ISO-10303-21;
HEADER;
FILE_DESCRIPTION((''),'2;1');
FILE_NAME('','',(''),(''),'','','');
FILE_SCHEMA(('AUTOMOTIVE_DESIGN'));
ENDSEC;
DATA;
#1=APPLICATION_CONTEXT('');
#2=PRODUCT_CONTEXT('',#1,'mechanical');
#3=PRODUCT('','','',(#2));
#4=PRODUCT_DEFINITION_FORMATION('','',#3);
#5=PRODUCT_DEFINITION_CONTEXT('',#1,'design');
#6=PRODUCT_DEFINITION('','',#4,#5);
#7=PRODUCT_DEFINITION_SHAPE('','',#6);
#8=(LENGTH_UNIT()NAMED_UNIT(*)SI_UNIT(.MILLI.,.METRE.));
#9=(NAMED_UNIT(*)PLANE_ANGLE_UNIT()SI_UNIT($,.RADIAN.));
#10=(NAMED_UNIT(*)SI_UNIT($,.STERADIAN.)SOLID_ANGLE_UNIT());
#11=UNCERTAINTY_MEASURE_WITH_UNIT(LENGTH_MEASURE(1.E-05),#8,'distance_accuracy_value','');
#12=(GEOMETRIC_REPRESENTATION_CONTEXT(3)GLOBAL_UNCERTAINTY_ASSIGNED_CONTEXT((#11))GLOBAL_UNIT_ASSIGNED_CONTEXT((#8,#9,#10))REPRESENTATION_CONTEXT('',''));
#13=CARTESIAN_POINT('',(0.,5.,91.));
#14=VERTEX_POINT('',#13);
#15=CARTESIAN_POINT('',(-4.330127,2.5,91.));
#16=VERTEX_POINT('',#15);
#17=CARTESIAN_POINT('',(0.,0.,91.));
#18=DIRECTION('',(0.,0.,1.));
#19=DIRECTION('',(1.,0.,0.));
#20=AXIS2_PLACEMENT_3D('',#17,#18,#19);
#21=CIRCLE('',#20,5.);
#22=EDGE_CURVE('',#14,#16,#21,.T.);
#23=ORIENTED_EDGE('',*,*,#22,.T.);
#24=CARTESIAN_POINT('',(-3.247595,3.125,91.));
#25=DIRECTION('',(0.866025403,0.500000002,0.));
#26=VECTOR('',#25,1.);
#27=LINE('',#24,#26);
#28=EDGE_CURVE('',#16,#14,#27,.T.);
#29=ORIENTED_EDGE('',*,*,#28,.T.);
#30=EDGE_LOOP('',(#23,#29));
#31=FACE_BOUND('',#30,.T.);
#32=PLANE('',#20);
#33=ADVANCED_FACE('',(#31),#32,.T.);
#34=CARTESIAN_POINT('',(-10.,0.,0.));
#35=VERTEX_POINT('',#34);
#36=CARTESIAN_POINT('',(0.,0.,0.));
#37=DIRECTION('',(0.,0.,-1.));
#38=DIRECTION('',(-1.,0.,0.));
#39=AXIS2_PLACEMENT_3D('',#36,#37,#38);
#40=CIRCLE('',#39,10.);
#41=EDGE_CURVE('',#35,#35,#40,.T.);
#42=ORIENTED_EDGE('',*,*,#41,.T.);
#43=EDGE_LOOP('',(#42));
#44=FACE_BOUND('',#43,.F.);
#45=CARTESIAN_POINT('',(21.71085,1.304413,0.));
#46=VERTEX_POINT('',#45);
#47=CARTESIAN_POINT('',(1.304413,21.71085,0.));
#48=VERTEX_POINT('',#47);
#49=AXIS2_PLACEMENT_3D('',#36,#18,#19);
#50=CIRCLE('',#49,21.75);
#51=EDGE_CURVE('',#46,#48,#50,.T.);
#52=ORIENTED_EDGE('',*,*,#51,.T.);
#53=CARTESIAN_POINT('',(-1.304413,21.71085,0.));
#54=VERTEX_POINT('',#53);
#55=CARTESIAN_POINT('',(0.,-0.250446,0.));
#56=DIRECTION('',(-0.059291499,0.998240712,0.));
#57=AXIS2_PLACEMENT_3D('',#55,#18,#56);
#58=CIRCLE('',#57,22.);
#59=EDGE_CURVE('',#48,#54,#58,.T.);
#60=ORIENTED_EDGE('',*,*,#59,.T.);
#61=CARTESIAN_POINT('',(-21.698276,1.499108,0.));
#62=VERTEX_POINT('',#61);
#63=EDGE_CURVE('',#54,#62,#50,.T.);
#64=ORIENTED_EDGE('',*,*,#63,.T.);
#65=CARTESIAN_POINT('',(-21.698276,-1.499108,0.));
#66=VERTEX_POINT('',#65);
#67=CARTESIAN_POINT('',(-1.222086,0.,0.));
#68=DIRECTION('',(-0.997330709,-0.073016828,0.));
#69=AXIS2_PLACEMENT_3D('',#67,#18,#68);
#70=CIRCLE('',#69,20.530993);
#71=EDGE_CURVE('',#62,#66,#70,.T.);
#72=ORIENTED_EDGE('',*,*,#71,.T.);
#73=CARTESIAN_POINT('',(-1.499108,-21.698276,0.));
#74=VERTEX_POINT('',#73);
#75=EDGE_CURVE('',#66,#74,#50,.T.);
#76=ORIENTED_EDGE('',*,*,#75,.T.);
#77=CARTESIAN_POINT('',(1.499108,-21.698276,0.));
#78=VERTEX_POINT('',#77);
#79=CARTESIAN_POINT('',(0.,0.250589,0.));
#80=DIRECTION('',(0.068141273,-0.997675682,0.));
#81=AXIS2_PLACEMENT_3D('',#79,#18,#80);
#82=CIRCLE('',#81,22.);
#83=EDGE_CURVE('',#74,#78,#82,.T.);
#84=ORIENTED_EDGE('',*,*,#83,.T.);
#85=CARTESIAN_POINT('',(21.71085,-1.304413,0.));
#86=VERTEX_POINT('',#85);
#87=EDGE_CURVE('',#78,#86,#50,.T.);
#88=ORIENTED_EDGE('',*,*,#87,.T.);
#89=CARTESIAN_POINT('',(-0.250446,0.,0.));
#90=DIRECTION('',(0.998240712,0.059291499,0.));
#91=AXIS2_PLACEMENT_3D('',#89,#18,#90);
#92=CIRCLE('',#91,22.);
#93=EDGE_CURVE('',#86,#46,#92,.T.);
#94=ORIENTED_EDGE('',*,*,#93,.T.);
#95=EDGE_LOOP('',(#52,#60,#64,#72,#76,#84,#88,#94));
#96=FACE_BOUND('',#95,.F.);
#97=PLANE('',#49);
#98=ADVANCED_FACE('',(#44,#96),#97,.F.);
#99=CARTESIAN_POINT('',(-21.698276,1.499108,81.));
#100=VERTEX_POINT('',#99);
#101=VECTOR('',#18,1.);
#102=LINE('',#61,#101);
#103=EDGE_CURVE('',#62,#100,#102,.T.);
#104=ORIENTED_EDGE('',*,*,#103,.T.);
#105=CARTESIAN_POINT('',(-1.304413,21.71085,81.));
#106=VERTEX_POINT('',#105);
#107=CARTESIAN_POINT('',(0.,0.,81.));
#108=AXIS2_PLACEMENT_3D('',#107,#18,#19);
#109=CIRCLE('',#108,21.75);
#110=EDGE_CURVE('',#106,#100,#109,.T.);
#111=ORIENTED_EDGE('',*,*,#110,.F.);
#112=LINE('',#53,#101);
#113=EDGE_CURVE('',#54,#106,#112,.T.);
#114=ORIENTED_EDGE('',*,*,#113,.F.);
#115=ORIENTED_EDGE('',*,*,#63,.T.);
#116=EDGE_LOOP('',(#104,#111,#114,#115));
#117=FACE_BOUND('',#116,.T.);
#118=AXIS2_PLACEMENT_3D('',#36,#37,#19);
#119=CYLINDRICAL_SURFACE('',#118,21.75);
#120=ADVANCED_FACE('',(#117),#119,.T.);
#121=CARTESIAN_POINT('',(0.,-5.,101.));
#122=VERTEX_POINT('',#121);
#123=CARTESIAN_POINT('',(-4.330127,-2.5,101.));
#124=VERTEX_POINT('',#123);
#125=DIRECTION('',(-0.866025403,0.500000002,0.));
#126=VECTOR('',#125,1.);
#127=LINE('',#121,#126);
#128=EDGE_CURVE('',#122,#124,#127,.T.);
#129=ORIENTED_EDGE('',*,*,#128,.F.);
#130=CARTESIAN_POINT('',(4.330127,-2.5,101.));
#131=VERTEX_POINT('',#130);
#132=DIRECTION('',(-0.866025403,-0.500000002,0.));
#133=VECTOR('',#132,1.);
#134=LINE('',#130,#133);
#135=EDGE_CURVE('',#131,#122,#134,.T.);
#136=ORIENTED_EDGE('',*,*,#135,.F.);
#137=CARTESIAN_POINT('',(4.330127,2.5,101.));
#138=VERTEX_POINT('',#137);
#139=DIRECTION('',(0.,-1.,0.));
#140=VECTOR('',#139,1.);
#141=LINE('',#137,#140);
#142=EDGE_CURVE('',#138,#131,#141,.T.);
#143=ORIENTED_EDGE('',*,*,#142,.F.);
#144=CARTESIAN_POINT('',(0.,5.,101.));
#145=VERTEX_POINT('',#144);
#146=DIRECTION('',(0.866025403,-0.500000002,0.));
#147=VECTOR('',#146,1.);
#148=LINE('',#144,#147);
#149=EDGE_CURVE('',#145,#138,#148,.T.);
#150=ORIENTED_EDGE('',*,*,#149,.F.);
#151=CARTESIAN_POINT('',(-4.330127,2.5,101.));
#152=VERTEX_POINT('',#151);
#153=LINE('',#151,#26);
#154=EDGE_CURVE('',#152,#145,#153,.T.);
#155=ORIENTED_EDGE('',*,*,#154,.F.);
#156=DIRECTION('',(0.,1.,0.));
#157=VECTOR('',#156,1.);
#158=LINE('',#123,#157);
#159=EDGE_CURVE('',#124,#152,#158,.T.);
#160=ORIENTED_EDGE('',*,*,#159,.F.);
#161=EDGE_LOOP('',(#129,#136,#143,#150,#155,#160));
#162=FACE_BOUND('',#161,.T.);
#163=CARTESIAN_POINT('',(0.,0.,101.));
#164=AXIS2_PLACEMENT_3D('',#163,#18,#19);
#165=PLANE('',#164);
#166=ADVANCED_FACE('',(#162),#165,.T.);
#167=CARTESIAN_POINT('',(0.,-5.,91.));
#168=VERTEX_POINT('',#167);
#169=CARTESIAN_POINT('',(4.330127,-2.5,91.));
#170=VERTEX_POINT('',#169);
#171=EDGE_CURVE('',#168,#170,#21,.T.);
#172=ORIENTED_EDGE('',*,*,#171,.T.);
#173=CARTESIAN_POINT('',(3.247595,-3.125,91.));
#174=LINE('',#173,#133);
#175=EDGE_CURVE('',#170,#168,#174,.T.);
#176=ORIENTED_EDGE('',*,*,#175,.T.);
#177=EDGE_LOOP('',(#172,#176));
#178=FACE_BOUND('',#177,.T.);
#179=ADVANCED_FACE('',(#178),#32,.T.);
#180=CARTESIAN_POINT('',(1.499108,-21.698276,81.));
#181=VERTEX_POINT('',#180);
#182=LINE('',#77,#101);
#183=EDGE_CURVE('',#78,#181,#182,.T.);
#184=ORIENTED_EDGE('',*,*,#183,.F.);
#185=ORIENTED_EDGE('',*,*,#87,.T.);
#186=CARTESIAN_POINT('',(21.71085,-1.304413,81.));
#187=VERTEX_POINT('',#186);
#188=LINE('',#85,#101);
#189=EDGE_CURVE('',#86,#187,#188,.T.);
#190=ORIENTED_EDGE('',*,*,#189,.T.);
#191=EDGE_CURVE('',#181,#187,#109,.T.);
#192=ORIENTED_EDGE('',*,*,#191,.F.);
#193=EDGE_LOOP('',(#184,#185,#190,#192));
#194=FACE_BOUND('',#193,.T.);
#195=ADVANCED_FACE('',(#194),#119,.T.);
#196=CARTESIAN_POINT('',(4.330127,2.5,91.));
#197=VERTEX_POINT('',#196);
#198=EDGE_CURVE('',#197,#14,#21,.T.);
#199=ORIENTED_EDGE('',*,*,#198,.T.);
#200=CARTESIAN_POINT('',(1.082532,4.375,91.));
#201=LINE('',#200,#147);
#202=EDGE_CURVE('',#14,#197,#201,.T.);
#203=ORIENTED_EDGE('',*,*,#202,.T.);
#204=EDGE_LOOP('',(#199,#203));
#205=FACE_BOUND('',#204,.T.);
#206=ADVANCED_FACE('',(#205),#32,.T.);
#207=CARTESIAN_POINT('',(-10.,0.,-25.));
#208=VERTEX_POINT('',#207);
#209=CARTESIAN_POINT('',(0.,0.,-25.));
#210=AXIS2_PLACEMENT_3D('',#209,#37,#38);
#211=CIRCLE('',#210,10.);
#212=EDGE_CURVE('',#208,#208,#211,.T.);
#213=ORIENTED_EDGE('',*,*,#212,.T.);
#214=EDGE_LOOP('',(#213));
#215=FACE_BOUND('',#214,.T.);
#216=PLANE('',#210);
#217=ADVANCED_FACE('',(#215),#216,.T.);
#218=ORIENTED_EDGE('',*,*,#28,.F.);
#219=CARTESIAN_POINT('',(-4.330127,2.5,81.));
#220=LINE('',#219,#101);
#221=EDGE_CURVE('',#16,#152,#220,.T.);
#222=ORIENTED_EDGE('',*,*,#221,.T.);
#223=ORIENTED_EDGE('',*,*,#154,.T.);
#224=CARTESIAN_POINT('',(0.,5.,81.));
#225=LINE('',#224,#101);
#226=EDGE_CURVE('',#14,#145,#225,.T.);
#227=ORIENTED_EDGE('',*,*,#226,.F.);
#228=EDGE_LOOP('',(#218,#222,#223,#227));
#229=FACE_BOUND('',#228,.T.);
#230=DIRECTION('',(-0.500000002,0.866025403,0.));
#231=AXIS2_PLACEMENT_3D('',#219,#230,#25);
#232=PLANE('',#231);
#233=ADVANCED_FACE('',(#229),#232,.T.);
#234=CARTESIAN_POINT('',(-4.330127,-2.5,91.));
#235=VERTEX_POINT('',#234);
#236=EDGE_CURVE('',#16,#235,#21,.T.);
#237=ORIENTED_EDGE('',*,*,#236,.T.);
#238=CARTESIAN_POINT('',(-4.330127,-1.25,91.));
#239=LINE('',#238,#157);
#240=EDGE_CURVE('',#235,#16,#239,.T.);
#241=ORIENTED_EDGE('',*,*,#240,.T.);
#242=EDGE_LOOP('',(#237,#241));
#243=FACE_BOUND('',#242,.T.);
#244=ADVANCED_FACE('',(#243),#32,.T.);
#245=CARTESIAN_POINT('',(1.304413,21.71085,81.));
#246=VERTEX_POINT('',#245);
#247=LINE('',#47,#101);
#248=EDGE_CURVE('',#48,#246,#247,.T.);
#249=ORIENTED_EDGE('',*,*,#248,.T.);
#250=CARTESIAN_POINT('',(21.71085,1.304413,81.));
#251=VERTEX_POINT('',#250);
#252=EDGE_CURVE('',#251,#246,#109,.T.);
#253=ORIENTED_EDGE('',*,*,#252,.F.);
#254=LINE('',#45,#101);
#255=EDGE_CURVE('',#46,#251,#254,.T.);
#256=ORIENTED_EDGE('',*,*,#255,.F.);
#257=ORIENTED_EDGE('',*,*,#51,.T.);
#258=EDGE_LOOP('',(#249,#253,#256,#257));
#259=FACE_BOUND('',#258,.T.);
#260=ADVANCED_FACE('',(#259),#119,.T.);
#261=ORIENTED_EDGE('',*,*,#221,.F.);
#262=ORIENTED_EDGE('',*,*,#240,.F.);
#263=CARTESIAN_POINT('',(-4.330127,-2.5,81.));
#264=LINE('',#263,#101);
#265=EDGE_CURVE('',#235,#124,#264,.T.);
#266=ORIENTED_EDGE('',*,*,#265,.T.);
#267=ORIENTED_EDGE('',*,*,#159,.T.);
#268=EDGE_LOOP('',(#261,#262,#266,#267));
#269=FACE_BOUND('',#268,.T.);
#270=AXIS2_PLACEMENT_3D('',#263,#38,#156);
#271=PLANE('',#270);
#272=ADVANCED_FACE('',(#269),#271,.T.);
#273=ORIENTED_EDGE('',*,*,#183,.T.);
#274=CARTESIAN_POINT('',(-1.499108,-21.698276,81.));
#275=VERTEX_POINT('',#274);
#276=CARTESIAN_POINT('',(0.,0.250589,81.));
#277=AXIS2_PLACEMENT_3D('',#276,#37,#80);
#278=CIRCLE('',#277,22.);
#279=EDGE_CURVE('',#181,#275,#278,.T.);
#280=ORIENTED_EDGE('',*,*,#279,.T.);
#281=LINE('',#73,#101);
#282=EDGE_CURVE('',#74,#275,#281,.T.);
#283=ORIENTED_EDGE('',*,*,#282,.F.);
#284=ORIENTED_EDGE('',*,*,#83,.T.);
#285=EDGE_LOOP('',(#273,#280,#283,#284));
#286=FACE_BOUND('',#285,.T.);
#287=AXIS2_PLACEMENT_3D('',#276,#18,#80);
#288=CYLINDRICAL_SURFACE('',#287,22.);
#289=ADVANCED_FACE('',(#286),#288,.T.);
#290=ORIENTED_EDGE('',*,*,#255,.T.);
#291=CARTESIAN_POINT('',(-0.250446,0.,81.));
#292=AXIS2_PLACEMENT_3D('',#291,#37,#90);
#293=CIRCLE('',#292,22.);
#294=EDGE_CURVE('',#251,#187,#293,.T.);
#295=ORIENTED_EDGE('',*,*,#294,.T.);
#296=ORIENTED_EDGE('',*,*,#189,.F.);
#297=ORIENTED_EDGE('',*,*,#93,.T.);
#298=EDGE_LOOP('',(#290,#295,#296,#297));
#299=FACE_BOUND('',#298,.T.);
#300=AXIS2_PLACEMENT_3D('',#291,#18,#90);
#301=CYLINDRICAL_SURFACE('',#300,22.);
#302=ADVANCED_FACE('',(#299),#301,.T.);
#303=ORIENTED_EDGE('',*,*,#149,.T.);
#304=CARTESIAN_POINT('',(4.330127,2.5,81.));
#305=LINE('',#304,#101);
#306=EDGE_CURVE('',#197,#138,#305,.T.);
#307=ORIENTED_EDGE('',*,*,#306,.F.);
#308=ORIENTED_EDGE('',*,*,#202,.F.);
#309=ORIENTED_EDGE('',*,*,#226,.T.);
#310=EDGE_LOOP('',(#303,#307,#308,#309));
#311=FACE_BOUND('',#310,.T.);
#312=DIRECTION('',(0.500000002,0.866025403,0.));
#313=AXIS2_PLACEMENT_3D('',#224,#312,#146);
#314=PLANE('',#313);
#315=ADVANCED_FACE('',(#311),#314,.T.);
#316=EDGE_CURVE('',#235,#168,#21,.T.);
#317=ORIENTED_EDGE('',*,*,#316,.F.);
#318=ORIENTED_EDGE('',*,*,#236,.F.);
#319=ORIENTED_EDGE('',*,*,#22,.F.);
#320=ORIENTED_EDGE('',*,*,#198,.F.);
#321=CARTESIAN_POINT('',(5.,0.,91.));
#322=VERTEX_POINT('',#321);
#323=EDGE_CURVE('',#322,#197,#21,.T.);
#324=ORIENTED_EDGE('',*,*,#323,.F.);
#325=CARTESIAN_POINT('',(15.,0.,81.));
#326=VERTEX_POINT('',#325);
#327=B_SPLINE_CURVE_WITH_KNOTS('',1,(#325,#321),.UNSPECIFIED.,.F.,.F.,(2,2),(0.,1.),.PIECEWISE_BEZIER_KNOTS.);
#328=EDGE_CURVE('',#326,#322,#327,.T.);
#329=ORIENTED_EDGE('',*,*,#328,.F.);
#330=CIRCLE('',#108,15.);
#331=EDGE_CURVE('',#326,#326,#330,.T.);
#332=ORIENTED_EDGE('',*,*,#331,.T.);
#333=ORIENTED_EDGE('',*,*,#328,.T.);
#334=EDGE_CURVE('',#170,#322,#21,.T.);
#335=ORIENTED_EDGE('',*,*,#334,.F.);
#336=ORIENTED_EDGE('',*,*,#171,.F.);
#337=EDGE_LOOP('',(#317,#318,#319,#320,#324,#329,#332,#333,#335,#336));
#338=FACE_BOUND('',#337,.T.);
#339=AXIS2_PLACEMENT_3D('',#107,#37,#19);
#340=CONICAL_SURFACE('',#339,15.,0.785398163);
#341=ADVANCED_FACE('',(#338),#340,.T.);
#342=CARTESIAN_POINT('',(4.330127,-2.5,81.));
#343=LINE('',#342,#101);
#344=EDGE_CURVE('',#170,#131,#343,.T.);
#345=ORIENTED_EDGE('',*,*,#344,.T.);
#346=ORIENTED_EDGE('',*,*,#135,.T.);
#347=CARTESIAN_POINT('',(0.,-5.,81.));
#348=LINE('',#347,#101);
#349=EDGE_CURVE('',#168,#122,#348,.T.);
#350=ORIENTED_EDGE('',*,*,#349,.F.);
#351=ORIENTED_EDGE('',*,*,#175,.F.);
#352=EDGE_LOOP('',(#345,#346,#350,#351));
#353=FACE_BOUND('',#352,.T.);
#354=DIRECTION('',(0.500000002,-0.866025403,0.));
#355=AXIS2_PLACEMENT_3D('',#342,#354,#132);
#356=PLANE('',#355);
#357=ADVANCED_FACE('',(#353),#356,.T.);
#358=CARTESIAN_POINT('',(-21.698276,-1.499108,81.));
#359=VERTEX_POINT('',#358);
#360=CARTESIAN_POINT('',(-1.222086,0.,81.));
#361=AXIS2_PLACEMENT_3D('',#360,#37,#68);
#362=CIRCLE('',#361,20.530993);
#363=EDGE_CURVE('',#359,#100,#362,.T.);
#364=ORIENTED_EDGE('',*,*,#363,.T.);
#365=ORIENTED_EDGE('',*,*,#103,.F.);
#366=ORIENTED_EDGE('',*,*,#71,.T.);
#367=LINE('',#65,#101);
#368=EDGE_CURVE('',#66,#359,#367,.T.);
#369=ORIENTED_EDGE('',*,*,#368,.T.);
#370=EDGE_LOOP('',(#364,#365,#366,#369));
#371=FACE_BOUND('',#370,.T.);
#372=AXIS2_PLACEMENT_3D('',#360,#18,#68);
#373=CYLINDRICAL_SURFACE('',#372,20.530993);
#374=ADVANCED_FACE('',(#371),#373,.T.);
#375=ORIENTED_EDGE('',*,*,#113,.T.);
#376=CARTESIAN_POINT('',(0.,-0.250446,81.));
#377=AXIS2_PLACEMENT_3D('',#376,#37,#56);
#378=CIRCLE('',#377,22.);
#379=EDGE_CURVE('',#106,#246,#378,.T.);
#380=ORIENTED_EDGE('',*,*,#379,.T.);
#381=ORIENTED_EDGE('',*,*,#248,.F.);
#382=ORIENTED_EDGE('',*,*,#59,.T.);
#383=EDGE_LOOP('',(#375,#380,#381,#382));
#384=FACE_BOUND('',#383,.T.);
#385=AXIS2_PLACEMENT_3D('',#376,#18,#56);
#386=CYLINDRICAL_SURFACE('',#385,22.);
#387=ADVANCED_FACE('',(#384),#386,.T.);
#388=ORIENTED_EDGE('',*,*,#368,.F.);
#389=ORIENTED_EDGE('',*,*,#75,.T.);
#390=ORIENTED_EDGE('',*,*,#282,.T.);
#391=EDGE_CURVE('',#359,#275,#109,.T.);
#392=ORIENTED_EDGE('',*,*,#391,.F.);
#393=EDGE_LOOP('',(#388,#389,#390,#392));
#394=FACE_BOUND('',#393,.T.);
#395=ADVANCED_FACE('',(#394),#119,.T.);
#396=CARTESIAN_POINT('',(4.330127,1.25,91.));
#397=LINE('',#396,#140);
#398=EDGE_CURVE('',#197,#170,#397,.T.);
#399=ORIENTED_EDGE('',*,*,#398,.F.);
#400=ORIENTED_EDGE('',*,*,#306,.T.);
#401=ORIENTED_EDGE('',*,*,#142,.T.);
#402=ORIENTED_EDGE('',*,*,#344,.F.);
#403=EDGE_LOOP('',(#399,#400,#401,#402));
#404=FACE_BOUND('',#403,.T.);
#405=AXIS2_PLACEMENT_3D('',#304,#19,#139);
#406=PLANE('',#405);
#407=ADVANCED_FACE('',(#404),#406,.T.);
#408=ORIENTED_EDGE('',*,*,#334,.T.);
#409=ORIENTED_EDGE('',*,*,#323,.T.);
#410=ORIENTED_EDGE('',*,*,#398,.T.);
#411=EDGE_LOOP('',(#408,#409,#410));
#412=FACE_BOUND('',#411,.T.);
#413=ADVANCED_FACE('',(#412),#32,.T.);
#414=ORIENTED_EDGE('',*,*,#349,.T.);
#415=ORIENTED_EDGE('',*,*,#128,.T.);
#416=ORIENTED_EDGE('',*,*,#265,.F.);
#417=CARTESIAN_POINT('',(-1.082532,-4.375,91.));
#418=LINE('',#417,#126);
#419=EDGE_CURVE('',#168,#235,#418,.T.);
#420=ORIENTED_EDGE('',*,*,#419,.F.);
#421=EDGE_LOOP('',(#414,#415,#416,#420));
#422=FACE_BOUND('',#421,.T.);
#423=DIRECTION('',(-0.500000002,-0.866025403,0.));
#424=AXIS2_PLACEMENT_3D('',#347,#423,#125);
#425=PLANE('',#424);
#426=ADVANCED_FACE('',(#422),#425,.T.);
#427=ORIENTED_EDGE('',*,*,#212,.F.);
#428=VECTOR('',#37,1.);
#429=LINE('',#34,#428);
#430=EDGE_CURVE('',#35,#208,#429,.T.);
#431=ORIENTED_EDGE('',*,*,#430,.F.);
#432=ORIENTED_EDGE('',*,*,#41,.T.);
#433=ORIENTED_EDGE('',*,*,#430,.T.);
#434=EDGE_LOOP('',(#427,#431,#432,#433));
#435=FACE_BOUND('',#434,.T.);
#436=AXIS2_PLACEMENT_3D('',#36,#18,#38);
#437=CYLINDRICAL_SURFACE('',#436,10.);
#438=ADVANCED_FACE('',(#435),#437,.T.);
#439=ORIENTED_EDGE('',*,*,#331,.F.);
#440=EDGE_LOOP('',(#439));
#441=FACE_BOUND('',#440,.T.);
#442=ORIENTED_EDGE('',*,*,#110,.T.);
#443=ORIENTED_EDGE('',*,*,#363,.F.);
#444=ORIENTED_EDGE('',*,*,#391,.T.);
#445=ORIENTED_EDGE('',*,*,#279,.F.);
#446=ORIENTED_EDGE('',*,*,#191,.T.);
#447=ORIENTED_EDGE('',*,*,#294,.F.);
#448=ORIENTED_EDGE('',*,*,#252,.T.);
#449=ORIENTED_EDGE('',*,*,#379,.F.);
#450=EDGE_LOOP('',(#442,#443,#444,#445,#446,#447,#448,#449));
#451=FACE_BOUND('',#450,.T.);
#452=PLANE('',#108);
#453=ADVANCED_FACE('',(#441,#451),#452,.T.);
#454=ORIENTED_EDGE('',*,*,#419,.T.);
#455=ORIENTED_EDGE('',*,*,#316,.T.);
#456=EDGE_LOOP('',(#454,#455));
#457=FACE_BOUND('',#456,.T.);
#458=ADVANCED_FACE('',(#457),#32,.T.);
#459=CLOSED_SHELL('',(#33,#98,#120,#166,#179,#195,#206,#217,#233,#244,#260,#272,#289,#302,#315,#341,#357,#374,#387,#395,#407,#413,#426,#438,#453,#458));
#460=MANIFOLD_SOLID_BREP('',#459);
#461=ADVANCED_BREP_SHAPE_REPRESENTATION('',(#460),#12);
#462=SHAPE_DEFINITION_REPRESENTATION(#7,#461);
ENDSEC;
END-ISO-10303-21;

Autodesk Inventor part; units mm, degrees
ref_plane "YZ Plane" through (0, 0, 0) normal (1, 0, 0) x (0, 1, 0)
ref_plane "XZ Plane" through (0, 0, 0) normal (0, 1, 0) x (-1, 0, 0)
ref_plane "XY Plane" through (0, 0, 0) normal (0, 0, 1) x (1, 0, 0)
sketch "Boceto1" plane through (0, 0, 0) normal (0, 0, 1) x (1, 0, 0)
  circle A0 centre (0, 0) radius 21.75
  arc A1 (1.304413, 21.71085) -> (0, 23.055) centre (0, 21.75) ccw
  arc A2 (0, 23.055) -> (-1.304413, 21.71085) centre (0, 21.75) ccw
  line L0 (0, -21.75) -> (0, -23.25)
  arc A3 (0, -23.25) -> (1.499108, -21.698276) centre (0, -21.75) ccw
  arc A4 (-1.499108, -21.698276) -> (0, -23.25) centre (0, -21.75) ccw
  line L1 (21.75, 0) -> (23.055, 0)
  line L2 (-21.75, 0) -> (-23.25, 0)
  arc A5 (-21.698276, 1.499108) -> (-21.698276, -1.499108) centre (-21.75, 0) ccw
  arc A6 (21.71085, -1.304413) -> (21.71085, 1.304413) centre (21.75, 0) ccw
  dimension "d0" = 43.5
  dimension "d2" = 1.5
  dimension "d4" = 1.5
extrude "Extrusión1" add sketch "Boceto1" along normal blind 81
sketch "Boceto2" plane through (0, 0, 81) normal (0, 0, 1) x (1, 0, 0)
  line L0 (0, 5) -> (4.330127, 2.5)
  line L1 (4.330127, 2.5) -> (4.330127, -2.5)
  line L2 (4.330127, -2.5) -> (0, -5)
  line L3 (0, -5) -> (-4.330127, -2.5)
  line L4 (-4.330127, -2.5) -> (-4.330127, 2.5)
  line L5 (-4.330127, 2.5) -> (0, 5)
  point P0 (0, 0)
  point P1 (0, 0)
extrude "Extrusión2" add sketch "Boceto2" along normal blind 20
sketch "Boceto10" plane through (0, 0, 0) normal (0, 0, -1) x (-1, 0, 0)
  circle A0 centre (0, 0) radius 7.5
  dimension "d37" = 15
extrude "Extrusión9" add sketch "Boceto10" along normal blind 25
sketch "Boceto12" plane through (0, 0, 0) normal (0, 0, -1) x (-1, 0, 0)
  circle A0 centre (0, 0) radius 10
  dimension "d40" = 20
extrude "Extrusión10" add sketch "Boceto12" along normal blind 25
sketch "Boceto20" plane through (0, 0, 81) normal (0, 0, 1) x (1, 0, 0)
  circle A0 centre (0, 0) radius 15
  dimension "d61" = 30
ref_plane "Plano de trabajo1" through (0, 0, 91) normal (0, 0, 1) x (1, 0, 0)
sketch "Boceto21" plane through (0, 0, 91) normal (0, 0, 1) x (1, 0, 0)
  line L0 (4.330127, 2.5) -> (4.330127, -2.5)
  circle A0 centre (0, 0) radius 5
sketch "Boceto20 outline for Solevación1" plane through (0, 0, 81) normal (0, 0, 1) x (1, 0, 0)
  circle A0 centre (0, 0) radius 15
sketch "Boceto21 outline for Solevación1" plane through (0, 0, 91) normal (0, 0, 1) x (1, 0, 0)
  circle A0 centre (0, 0) radius 5
loft "Solevación1" add profiles "Boceto20 outline for Solevación1", "Boceto21 outline for Solevación1"
sketch "Boceto22" plane through (0, 0, 81) normal (0, 0, 1) x (1, 0, 0)
  arc A0 (1.304413, 21.71085) -> (-1.304413, 21.71085) centre (0, 21.75) ccw
  arc A1 (1.304413, 21.71085) -> (-1.304413, 21.71085) centre (0, 21.749554) ccw
  arc A2 (21.71085, -1.304413) -> (21.71085, 1.304413) centre (21.75, 0) ccw
  arc A3 (21.71085, -1.304413) -> (21.71085, 1.304413) centre (21.749554, 0) ccw
  arc A4 (-1.499108, -21.698276) -> (1.499108, -21.698276) centre (0, -21.75) ccw
  arc A5 (-1.499108, -21.698276) -> (1.499108, -21.698276) centre (0, -21.749411) ccw
  arc A6 (-21.698276, 1.499108) -> (-21.698276, -1.499108) centre (-21.75, 0) ccw
  arc A7 (-21.685394, 1.49099) -> (-21.698276, -1.499108) centre (-21.753079, -0.003795) ccw
  arc A8 (-21.698276, 1.499108) -> (-21.698276, -1.499108) centre (-1.222086, 0) ccw
  arc A9 (1.304413, 21.71085) -> (-1.304413, 21.71085) centre (0, -0.250446) ccw
  arc A10 (21.71085, -1.304413) -> (21.71085, 1.304413) centre (-0.250446, 0) ccw
  arc A11 (-1.499108, -21.698276) -> (1.499108, -21.698276) centre (0, 0.250589) ccw
  point P0 (0, 0)
sketch "Boceto22 outline for Extrusión16" plane through (0, 0, 81) normal (0, 0, 1) x (1, 0, 0)
  arc A0 (-1.304413, 21.71085) -> (1.304413, 21.71085) centre (0, -0.250446) cw
  arc A1 (1.304413, 21.71085) -> (-1.304413, 21.71085) centre (0, 21.75) ccw
  arc A2 (21.71085, 1.304413) -> (21.71085, -1.304413) centre (-0.250446, 0) cw
  arc A3 (21.71085, -1.304413) -> (21.71085, 1.304413) centre (21.75, 0) ccw
  arc A4 (-21.698276, -1.499108) -> (-21.698276, 1.499108) centre (-1.222086, 0) cw
  arc A5 (-21.698276, 1.499108) -> (-21.698276, -1.499108) centre (-21.75, 0) ccw
  arc A6 (1.499108, -21.698276) -> (-1.499108, -21.698276) centre (0, 0.250589) cw
  arc A7 (-1.499108, -21.698276) -> (1.499108, -21.698276) centre (0, -21.75) ccw
extrude "Extrusión16" cut sketch "Boceto22 outline for Extrusión16" against normal blind 211
properties part number "eix bobina"
